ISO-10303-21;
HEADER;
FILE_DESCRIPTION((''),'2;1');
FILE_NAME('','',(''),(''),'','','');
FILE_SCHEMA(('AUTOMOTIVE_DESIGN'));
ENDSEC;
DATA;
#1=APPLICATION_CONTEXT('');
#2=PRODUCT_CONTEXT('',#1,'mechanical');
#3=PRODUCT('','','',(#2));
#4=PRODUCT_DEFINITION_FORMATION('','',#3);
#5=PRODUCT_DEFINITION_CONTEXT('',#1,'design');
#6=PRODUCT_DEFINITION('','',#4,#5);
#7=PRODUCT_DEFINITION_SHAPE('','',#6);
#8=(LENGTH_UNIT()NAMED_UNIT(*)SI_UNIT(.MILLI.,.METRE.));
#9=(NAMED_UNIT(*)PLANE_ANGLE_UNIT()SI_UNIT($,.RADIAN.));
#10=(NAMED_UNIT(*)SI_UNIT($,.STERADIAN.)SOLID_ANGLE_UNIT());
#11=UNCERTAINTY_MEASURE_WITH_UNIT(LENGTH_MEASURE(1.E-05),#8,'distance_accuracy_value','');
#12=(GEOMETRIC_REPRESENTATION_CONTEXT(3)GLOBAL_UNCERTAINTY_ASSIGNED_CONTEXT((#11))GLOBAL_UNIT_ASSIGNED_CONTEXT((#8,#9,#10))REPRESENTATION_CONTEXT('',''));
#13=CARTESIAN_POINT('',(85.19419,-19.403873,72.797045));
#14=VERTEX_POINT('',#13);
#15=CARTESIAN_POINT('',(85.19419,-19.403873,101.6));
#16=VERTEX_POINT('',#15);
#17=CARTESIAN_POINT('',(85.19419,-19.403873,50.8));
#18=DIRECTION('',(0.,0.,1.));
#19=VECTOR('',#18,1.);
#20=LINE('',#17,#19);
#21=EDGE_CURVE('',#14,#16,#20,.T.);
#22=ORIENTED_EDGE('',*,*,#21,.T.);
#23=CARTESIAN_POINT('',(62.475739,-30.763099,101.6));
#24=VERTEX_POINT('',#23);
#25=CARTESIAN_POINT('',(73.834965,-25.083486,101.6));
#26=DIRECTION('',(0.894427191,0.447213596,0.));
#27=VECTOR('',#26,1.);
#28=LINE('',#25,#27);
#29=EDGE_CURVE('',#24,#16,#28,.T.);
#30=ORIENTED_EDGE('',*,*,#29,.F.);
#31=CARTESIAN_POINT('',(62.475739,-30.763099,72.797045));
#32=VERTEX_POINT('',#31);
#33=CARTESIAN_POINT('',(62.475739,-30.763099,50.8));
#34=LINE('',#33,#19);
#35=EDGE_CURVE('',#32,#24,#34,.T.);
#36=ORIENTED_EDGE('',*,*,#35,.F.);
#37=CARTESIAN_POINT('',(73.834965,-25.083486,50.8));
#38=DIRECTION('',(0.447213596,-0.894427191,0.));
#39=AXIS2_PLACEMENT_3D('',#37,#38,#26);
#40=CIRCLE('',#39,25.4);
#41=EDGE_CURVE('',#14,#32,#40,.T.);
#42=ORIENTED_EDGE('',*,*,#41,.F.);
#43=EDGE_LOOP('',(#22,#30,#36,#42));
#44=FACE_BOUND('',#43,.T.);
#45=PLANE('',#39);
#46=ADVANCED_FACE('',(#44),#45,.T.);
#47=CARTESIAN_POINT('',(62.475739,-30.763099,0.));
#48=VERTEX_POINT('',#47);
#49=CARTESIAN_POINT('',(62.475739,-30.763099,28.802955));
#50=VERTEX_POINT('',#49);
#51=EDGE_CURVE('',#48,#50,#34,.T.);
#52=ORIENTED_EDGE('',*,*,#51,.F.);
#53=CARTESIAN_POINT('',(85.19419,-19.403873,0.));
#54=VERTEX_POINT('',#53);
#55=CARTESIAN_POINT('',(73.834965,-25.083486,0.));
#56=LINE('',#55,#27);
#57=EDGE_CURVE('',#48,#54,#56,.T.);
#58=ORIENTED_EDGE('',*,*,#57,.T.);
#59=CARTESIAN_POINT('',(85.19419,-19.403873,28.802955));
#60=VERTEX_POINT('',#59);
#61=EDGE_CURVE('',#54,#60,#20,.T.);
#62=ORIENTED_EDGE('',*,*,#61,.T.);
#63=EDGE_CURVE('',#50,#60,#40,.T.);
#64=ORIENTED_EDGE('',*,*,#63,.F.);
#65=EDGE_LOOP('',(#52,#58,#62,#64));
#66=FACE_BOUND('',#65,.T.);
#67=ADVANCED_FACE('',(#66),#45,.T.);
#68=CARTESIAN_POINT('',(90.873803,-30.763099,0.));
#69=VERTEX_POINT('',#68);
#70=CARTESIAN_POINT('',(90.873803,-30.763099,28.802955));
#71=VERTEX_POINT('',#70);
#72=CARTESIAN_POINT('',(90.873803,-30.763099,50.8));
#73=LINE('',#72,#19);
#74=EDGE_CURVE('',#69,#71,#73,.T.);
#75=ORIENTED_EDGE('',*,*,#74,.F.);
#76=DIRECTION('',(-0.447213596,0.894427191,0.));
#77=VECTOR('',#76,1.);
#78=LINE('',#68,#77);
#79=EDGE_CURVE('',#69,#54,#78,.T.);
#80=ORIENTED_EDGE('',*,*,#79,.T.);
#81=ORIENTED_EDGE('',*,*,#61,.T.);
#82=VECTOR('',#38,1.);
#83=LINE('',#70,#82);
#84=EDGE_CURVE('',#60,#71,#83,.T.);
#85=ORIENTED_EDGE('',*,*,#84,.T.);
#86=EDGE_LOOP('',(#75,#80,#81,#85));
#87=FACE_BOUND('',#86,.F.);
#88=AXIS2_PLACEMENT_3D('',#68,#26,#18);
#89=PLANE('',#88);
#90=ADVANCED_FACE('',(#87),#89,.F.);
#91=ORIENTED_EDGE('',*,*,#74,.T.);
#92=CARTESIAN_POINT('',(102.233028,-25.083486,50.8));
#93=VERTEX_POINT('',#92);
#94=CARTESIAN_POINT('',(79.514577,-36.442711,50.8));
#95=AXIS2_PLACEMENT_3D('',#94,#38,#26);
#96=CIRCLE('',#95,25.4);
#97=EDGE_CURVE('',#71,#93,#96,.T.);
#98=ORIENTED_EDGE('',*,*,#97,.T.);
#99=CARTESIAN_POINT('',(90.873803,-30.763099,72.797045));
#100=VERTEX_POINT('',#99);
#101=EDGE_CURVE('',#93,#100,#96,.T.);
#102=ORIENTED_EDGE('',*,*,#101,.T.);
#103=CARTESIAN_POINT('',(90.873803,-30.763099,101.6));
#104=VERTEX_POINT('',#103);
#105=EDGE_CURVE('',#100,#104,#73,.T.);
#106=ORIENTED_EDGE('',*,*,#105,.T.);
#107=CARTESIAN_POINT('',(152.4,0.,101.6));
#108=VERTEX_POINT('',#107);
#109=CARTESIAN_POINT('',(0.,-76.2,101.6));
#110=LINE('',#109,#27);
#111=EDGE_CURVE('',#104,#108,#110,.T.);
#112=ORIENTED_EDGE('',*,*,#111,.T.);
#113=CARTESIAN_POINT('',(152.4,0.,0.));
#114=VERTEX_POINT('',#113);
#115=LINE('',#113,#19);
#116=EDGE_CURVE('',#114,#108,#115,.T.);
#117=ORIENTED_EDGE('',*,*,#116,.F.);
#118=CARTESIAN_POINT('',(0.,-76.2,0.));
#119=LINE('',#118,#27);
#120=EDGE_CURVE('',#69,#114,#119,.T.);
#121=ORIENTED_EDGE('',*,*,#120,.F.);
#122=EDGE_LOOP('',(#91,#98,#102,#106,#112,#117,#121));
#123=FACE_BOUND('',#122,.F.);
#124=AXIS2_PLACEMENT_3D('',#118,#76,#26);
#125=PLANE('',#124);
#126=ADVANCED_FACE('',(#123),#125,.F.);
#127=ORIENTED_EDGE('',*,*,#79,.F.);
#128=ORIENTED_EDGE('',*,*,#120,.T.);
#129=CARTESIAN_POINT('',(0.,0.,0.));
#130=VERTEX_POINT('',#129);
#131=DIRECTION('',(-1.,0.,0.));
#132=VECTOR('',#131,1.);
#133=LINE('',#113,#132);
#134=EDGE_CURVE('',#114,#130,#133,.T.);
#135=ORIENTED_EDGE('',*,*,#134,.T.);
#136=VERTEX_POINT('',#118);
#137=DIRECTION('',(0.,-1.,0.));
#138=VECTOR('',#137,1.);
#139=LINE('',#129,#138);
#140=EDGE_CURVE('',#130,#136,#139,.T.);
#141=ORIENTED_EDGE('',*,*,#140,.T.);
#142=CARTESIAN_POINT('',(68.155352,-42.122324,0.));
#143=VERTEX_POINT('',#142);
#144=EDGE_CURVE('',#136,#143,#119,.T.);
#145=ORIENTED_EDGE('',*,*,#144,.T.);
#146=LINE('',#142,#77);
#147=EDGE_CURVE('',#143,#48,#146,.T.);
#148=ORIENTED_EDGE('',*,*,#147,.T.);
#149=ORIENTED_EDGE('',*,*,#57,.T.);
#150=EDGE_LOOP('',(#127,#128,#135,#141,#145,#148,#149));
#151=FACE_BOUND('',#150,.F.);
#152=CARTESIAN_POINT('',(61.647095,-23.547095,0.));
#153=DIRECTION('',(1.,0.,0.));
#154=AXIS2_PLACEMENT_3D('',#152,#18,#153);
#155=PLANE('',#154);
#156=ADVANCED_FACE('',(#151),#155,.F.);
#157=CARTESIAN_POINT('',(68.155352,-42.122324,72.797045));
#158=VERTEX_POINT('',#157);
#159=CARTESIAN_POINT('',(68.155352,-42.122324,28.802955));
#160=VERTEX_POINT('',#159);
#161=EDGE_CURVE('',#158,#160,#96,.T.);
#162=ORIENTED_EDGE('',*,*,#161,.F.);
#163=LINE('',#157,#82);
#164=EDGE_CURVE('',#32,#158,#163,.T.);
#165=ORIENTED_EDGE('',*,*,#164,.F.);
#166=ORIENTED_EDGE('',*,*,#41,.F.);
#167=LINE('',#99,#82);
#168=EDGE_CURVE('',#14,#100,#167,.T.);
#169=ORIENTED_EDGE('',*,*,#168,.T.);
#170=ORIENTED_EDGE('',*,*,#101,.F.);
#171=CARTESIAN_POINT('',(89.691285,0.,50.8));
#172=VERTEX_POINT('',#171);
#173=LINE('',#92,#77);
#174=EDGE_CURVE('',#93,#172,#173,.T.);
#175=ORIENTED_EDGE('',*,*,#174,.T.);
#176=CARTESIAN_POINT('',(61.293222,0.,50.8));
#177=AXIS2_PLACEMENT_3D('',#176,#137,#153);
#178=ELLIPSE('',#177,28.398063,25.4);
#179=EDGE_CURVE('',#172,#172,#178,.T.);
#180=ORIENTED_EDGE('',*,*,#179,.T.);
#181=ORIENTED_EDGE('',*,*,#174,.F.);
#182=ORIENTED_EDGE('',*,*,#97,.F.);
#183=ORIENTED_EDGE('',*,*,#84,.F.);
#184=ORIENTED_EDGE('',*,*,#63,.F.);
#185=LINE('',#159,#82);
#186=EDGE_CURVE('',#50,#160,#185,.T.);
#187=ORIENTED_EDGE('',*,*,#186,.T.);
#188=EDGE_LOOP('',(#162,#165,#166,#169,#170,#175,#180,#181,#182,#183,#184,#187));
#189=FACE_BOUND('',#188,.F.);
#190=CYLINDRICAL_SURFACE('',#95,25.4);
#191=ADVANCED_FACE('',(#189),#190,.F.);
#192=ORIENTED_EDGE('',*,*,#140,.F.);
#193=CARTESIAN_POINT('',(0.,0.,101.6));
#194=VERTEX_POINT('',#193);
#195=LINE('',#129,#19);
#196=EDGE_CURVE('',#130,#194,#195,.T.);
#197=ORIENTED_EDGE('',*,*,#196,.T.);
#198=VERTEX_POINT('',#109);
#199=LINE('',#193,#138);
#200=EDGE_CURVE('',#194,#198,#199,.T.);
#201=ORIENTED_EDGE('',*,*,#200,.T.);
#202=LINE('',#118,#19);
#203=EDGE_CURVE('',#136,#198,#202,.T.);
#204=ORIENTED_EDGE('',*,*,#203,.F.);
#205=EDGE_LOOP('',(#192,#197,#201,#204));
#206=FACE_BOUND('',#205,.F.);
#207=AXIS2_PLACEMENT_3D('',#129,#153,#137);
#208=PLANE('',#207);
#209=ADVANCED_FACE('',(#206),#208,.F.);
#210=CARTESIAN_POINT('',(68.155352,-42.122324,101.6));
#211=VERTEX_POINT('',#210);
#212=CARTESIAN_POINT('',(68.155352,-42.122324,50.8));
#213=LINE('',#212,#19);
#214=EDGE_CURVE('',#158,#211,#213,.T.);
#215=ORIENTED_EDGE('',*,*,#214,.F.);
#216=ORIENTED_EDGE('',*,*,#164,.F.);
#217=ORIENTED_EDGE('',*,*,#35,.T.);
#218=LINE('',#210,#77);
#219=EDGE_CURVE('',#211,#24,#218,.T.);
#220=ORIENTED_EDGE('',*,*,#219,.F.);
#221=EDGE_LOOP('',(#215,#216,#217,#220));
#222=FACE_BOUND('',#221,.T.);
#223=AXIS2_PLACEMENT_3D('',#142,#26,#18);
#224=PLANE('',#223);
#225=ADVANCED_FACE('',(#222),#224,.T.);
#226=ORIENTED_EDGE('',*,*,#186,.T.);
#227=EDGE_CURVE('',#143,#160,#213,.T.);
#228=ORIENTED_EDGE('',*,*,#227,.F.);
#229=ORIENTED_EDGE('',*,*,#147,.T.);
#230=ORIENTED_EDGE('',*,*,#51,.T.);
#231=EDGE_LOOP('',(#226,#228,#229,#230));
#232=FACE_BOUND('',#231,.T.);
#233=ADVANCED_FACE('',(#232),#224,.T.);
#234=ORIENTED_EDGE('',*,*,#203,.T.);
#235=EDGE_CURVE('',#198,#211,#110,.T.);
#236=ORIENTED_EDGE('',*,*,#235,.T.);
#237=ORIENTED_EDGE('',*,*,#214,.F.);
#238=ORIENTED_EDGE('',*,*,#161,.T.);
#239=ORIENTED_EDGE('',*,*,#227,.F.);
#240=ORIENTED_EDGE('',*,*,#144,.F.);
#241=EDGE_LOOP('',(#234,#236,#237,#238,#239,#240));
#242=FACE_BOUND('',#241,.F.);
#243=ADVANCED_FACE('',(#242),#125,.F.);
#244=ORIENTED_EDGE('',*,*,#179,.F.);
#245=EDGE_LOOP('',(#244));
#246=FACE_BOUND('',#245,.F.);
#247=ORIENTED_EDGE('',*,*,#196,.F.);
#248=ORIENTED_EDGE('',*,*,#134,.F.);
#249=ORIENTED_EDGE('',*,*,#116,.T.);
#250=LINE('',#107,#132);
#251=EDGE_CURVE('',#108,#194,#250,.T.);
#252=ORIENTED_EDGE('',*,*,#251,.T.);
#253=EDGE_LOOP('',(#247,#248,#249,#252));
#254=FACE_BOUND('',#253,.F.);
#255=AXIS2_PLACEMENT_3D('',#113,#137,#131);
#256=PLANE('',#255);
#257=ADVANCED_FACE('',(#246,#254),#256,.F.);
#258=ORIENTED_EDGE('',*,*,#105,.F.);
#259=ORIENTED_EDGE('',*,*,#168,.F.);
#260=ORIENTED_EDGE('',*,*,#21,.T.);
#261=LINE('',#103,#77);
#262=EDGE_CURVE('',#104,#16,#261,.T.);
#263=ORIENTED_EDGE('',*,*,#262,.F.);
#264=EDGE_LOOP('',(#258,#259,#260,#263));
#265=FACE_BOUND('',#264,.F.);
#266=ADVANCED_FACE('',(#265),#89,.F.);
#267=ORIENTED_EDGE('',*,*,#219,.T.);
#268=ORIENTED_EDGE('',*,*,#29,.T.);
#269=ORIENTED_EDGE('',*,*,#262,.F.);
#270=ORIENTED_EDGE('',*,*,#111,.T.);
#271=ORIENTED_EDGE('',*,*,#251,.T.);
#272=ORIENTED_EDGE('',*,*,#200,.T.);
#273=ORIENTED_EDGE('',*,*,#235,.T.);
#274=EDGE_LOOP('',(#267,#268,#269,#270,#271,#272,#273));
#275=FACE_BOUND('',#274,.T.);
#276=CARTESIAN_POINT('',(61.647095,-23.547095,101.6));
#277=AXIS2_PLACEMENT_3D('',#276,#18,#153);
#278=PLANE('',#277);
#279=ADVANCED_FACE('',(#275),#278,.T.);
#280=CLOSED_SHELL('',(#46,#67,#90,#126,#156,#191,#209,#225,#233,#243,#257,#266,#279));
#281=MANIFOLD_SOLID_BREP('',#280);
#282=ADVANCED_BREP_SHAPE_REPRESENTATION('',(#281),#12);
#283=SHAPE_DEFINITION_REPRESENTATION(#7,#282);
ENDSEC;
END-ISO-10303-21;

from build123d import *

# Parameters (mm, degrees)
F1_DEPTH = 101.6
F2_W     = 25.4
F2_H     = 101.6
F3_DEPTH = 12.7
F4_R     = 25.4
F5_DEPTH = 68.1563519542


# Not quite as in the source:
# - a feature names something its author has since deleted; it is built from what else it names


with BuildPart() as f1:
    # F0 (on Top) → F1 (new body)
    with BuildSketch(Plane.XY):
        Polygon((152.4, 0), (0, 0), (0, -76.2), align=None)
    extrude(amount=F1_DEPTH)

    # F2 (on face) → F3 (cut)
    with BuildSketch(Plane(origin=(30.48, -60.96, 0), x_dir=(0.894427191, 0.4472135955, 0), z_dir=(0.4472135955, -0.894427191, 0))):
        with Locations((54.8223240229, 50.8)):
            Rectangle(F2_W, F2_H)
    extrude(amount=-F3_DEPTH, mode=Mode.SUBTRACT)

    # F4 (on face) → F5 (cut, through all)
    with BuildSketch(Plane(origin=(30.48, -60.96, 0), x_dir=(0.894427191, 0.4472135955, 0), z_dir=(0.4472135955, -0.894427191, 0))):
        with Locations((54.8223240229, 50.8)):
            Circle(F4_R)
    extrude(amount=-F5_DEPTH, mode=Mode.SUBTRACT)


solid = f1.part
